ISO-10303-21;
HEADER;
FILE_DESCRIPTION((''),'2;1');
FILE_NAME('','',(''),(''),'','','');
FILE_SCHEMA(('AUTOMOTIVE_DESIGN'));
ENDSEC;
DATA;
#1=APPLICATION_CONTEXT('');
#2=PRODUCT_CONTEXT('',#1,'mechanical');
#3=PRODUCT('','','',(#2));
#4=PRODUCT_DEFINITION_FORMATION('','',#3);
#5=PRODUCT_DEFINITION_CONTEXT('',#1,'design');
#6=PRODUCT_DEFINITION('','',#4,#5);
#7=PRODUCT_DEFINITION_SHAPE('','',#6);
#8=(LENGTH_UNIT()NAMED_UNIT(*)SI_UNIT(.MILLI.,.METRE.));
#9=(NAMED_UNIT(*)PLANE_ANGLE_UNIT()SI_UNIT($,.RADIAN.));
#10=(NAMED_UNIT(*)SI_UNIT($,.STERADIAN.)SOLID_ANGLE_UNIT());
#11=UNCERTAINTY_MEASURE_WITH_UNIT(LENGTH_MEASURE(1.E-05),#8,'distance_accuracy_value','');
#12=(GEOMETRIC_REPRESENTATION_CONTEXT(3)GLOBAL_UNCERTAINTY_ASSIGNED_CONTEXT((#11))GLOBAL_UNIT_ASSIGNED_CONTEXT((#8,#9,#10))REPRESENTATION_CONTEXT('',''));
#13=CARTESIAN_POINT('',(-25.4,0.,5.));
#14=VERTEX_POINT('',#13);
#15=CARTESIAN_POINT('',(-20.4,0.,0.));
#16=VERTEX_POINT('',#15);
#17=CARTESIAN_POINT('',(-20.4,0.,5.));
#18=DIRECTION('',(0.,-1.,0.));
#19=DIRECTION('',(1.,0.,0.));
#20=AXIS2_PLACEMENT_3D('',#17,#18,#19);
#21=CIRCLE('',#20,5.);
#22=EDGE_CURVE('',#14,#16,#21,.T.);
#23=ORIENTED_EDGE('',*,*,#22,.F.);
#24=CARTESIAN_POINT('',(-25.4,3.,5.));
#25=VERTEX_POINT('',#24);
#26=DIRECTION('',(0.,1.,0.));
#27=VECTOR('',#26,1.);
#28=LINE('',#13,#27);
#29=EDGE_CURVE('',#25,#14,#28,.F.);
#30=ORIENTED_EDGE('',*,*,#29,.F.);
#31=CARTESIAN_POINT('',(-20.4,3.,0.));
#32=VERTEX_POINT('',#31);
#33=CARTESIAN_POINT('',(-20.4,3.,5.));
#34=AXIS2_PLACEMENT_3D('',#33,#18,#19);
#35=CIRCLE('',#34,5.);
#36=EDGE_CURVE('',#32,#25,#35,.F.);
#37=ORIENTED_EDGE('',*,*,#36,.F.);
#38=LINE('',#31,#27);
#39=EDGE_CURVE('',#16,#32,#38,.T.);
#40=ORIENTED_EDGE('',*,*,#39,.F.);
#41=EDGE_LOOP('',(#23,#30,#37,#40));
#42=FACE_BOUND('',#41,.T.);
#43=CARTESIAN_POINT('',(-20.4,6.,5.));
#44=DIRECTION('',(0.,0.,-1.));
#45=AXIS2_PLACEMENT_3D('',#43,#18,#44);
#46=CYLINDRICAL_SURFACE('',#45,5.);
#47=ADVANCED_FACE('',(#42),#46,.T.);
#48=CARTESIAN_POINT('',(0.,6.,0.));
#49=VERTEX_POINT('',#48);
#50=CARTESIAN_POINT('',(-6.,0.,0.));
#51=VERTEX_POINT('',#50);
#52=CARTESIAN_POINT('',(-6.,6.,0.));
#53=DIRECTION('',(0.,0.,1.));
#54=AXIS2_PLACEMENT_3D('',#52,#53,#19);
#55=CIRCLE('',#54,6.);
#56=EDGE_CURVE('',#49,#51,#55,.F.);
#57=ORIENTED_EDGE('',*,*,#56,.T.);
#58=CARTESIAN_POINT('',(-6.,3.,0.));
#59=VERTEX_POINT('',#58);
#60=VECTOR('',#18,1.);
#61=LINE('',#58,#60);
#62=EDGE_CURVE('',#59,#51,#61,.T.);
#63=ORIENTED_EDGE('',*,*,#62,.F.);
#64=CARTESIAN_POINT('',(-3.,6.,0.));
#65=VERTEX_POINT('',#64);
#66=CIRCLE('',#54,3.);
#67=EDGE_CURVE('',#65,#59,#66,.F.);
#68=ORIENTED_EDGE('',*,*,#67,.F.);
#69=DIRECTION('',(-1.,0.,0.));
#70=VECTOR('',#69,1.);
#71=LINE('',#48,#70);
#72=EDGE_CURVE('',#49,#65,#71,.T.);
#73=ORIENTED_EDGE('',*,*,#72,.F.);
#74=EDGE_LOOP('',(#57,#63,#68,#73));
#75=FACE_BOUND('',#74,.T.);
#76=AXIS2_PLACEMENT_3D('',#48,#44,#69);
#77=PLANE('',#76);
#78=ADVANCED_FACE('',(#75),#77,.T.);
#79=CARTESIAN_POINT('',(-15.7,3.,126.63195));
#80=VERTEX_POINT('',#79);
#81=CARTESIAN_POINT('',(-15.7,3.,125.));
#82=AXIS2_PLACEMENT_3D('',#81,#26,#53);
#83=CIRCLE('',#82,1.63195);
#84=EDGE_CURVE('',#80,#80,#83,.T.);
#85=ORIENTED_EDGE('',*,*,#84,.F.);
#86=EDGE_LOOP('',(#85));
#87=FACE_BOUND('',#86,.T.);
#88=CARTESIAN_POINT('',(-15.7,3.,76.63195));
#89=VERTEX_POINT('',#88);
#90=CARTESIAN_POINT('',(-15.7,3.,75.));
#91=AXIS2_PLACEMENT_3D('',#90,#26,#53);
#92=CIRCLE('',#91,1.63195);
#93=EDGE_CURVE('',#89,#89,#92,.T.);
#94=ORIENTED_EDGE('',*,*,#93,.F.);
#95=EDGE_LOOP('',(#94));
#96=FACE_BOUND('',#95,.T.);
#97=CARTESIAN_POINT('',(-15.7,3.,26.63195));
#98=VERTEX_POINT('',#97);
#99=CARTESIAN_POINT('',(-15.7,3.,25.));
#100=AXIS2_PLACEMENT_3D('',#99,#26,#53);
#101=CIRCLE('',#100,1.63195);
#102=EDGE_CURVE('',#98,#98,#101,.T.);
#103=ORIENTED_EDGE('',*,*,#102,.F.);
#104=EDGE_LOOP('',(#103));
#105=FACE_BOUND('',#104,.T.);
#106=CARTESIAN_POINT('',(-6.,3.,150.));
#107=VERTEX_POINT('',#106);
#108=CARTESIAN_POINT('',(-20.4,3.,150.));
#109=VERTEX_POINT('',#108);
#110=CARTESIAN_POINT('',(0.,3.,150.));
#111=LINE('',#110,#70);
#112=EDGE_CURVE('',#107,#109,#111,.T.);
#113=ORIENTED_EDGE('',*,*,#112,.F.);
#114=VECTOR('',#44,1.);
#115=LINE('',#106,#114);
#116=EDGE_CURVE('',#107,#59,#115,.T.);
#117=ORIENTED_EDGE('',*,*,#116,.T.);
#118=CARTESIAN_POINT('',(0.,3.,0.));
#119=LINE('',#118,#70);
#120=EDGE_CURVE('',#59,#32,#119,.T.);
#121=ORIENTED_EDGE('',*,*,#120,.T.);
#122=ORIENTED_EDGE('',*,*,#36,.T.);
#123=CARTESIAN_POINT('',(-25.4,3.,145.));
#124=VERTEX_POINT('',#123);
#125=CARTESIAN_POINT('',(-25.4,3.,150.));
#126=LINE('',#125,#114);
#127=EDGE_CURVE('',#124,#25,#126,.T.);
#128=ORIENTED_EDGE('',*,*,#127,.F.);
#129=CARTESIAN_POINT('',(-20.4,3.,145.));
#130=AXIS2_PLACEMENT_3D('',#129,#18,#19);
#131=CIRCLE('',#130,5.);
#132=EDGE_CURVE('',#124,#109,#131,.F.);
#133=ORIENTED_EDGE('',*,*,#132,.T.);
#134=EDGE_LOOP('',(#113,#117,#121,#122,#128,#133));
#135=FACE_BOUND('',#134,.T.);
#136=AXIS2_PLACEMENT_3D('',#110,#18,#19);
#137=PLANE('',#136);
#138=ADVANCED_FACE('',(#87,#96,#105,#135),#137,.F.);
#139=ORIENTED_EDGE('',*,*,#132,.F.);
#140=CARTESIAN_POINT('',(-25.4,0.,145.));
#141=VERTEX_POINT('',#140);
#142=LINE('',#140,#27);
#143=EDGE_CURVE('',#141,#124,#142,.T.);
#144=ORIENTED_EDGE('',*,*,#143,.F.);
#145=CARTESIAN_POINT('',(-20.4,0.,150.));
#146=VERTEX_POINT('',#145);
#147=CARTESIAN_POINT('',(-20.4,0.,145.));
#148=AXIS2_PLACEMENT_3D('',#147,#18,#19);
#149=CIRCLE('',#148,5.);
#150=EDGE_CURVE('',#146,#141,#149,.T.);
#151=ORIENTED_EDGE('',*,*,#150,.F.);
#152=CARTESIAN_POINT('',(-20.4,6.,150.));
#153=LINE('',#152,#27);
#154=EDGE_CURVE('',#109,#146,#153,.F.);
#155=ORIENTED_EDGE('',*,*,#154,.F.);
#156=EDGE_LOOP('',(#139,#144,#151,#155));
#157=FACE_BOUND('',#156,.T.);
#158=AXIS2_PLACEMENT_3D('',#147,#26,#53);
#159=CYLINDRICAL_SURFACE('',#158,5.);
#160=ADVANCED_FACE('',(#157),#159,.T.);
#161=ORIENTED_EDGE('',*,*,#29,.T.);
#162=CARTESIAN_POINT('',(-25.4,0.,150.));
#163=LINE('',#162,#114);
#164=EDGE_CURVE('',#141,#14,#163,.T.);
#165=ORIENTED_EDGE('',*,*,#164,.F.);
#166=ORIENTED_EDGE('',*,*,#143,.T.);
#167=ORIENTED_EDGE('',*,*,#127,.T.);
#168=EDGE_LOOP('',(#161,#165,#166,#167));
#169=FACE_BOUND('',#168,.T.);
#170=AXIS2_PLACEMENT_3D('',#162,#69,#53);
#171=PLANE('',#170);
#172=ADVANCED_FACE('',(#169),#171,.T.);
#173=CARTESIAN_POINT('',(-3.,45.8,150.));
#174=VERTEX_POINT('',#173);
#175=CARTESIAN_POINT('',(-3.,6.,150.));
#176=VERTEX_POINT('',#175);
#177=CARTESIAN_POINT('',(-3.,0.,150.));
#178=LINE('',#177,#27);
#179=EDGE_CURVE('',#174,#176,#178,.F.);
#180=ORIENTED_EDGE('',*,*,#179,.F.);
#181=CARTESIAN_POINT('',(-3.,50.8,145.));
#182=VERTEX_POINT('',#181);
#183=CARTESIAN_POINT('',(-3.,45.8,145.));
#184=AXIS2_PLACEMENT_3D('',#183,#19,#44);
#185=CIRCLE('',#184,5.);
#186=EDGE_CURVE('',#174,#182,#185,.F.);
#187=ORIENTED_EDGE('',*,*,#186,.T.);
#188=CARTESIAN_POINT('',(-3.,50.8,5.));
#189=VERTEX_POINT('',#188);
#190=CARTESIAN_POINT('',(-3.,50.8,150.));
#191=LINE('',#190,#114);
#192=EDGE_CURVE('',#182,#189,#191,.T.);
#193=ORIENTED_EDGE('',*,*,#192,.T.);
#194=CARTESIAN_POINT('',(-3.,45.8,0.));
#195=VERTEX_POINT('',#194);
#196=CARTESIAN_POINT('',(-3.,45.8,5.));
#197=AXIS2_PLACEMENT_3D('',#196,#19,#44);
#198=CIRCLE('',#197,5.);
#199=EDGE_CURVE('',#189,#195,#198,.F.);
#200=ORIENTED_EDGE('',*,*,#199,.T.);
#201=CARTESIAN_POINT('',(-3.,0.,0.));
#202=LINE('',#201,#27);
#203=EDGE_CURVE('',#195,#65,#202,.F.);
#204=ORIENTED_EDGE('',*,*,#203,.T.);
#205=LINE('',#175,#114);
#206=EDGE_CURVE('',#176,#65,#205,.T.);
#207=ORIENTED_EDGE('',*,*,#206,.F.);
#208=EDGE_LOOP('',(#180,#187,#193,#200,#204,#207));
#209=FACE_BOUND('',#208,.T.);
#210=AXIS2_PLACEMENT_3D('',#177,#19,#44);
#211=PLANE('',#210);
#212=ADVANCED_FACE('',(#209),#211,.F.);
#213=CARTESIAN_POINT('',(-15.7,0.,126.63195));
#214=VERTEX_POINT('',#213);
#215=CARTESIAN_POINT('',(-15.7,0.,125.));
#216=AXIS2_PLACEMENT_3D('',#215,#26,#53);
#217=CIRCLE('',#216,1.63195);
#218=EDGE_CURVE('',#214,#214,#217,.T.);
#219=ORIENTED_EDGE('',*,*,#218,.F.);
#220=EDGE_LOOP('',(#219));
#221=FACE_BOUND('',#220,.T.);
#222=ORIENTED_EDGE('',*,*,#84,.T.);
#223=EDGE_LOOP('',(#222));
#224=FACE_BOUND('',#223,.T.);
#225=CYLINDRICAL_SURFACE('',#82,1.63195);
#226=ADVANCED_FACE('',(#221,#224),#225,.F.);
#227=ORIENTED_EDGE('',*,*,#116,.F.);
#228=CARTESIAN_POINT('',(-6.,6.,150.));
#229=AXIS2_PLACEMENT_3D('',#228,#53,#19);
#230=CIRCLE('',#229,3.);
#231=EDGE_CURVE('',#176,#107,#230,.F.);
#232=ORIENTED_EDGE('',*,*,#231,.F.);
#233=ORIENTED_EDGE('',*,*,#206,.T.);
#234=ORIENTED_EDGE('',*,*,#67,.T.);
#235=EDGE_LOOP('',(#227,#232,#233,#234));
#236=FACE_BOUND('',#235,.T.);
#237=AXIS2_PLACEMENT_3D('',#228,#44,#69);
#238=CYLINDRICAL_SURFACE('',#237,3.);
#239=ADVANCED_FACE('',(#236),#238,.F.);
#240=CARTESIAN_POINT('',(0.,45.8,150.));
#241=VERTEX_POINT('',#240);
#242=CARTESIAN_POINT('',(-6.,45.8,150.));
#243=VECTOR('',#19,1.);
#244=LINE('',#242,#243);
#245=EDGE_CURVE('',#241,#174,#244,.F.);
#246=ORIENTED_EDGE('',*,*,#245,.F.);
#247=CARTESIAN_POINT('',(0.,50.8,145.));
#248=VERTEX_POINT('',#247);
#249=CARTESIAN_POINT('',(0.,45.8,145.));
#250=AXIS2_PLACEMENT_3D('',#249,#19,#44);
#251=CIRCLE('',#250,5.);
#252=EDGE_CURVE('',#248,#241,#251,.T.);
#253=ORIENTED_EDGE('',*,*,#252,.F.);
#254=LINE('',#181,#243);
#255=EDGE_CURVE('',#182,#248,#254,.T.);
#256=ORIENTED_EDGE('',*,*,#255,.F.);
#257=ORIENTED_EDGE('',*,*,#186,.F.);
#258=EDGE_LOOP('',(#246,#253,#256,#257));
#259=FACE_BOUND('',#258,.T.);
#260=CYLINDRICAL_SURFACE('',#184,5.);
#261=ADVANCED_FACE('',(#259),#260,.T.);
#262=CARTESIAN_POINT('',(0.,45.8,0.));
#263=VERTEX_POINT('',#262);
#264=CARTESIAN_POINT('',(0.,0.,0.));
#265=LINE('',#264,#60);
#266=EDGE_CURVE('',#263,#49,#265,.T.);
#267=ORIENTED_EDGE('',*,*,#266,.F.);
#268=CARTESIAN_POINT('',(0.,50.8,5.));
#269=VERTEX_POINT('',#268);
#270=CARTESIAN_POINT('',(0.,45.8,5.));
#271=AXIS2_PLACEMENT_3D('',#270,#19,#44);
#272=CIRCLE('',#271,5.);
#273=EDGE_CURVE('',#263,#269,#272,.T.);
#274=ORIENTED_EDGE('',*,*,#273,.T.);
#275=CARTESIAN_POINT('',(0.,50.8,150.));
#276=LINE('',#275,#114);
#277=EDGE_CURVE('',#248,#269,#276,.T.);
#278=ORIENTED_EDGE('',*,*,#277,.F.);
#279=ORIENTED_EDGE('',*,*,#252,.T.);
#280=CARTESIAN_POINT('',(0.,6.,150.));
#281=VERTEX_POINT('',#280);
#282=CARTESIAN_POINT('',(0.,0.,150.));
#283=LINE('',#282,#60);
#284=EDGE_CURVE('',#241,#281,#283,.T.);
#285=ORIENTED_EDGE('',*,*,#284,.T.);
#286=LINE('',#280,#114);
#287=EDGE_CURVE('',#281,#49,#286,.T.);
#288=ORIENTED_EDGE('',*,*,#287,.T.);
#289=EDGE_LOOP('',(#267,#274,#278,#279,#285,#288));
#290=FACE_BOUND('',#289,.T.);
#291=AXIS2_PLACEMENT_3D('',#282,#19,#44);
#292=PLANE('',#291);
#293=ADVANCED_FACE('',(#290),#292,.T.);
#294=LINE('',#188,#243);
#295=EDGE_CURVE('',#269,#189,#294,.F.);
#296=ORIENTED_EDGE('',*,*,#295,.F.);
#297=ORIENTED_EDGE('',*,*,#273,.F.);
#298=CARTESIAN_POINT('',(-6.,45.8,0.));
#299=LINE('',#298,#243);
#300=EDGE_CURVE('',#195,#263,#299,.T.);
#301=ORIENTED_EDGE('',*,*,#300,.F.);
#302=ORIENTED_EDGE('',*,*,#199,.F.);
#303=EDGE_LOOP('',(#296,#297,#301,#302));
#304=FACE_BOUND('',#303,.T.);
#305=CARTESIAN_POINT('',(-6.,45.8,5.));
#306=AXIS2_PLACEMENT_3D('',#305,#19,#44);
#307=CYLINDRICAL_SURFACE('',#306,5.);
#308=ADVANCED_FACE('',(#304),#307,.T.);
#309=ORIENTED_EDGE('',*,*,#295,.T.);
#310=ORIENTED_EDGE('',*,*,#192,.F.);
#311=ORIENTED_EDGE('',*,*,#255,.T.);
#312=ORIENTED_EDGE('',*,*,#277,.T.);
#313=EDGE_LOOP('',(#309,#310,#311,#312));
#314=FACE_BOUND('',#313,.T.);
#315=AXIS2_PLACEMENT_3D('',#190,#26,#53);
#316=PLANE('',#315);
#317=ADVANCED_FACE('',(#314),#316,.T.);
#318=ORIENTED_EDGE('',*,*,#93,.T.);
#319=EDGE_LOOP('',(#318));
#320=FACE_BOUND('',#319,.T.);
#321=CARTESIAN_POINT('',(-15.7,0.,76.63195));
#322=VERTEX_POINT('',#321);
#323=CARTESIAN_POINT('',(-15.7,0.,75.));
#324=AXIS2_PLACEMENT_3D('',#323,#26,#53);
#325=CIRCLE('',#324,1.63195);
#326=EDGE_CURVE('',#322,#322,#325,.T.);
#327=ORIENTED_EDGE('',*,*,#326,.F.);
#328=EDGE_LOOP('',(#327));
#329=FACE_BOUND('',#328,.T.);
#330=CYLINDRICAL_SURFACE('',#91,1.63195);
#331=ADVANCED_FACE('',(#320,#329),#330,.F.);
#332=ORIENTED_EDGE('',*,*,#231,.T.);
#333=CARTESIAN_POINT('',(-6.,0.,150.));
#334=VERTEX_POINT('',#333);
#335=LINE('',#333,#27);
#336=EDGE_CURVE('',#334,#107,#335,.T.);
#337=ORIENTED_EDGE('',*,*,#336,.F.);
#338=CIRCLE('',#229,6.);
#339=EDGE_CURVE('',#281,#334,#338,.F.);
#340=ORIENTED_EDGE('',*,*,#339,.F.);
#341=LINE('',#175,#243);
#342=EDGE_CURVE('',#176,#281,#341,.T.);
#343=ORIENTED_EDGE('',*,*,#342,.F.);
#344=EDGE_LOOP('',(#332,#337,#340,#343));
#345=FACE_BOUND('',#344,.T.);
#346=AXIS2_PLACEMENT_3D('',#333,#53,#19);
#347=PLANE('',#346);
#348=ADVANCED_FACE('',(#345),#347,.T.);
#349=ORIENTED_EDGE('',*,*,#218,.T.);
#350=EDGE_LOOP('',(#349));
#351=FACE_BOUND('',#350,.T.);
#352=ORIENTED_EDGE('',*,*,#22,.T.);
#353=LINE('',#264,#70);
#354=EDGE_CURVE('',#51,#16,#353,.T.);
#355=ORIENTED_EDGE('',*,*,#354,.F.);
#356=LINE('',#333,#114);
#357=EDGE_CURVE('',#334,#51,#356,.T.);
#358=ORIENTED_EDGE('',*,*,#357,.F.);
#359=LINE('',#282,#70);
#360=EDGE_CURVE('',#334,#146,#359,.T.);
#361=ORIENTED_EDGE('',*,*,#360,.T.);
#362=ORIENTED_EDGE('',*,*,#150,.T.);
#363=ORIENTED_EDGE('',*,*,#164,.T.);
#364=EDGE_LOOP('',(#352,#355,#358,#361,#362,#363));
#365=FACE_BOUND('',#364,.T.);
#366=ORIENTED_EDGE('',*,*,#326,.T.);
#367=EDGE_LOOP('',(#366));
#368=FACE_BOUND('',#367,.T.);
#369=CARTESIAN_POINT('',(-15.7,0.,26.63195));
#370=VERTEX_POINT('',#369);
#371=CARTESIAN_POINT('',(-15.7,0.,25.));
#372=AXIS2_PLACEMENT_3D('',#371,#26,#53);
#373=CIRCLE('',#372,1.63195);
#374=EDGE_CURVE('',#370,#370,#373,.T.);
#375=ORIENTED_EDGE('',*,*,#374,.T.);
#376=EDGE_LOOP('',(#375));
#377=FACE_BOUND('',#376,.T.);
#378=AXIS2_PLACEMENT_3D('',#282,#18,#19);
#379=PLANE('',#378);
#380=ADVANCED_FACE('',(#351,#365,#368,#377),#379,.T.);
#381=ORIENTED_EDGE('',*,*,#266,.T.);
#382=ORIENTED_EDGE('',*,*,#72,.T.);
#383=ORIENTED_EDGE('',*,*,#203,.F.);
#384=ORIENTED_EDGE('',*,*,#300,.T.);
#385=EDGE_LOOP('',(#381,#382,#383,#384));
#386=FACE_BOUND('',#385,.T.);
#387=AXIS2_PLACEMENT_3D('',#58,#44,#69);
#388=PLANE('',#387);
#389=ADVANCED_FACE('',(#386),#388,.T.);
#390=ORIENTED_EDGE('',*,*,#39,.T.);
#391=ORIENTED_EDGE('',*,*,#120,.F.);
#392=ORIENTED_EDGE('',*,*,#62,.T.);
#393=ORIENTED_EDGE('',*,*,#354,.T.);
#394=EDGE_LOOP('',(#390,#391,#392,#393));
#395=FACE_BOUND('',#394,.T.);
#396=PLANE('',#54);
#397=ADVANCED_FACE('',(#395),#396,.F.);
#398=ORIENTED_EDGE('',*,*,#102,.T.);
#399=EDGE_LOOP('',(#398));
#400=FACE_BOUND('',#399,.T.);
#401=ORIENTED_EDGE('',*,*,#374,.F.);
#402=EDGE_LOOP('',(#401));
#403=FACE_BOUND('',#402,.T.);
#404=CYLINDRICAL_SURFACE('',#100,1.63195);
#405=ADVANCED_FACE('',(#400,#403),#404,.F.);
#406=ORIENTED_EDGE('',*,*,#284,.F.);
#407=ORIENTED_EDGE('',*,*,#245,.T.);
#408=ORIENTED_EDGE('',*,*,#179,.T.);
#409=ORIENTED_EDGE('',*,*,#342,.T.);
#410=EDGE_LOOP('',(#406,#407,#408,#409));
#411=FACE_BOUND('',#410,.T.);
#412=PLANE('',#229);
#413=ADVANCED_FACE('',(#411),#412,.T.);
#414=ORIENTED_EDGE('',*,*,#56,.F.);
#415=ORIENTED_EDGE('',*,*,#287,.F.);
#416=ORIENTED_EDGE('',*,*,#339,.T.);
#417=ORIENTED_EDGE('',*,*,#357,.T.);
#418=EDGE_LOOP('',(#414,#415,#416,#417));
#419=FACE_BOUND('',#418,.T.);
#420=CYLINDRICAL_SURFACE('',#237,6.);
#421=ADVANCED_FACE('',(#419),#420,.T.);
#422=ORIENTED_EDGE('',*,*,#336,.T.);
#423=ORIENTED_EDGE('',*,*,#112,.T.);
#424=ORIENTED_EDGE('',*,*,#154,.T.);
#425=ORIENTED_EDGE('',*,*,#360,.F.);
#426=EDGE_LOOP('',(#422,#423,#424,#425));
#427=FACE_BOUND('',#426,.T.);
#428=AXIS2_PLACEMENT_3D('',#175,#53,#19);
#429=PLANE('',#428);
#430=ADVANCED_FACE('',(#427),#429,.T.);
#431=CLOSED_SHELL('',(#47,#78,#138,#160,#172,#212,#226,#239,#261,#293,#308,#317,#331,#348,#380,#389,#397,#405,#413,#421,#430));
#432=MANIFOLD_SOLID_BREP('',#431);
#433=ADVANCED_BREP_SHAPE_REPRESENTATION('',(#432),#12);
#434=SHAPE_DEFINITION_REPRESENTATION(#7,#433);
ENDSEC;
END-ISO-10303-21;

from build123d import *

# Parameters (mm, degrees)
BASE_FLANGE1_DEPTH           = 150
F_30_0_1285_DIAMETER_HOLE1_D = 3.2639
FILLET1_R                    = 5


# Sheet-metal steps are written as plain solids
with BuildPart() as part:
    # Sketch1 → Base-Flange1 (new body)
    with BuildSketch(Plane.XY):
        with BuildLine():
            Line((-25.4, 0), (-6, 0))
            ThreePointArc((-6, 0), (-1.757359313, 1.757359313), (0, 6))
            Line((0, 6), (0, 50.8))
            Line((0, 50.8), (-3, 50.8))
            Line((-3, 50.8), (-3, 6))
            ThreePointArc((-3, 6), (-3.878679656, 3.878679656), (-6, 3))
            Line((-6, 3), (-25.4, 3))
            Line((-25.4, 3), (-25.4, 0))
        make_face()
    extrude(amount=BASE_FLANGE1_DEPTH)

    # #30 (0.1285) Diameter Hole1 (through all)
    with Locations(Plane(origin=(0, 3, 0), x_dir=(1, 0, 0), z_dir=(0, 1, 0))):
        with Locations((-15.7, -25), (-15.7, -75), (-15.7, -125)):
            Hole(F_30_0_1285_DIAMETER_HOLE1_D / 2)

    # Fillet1
    fillet1_edges = [part.edges().sort_by_distance(p)[0] for p in [
        (-1.5, 50.8, 150),
        (-1.5, 50.8, 0),
        (-25.4, 1.5, 150),
        (-25.4, 1.5, 0),
    ]]
    fillet(fillet1_edges, radius=FILLET1_R)


solid = part.part
